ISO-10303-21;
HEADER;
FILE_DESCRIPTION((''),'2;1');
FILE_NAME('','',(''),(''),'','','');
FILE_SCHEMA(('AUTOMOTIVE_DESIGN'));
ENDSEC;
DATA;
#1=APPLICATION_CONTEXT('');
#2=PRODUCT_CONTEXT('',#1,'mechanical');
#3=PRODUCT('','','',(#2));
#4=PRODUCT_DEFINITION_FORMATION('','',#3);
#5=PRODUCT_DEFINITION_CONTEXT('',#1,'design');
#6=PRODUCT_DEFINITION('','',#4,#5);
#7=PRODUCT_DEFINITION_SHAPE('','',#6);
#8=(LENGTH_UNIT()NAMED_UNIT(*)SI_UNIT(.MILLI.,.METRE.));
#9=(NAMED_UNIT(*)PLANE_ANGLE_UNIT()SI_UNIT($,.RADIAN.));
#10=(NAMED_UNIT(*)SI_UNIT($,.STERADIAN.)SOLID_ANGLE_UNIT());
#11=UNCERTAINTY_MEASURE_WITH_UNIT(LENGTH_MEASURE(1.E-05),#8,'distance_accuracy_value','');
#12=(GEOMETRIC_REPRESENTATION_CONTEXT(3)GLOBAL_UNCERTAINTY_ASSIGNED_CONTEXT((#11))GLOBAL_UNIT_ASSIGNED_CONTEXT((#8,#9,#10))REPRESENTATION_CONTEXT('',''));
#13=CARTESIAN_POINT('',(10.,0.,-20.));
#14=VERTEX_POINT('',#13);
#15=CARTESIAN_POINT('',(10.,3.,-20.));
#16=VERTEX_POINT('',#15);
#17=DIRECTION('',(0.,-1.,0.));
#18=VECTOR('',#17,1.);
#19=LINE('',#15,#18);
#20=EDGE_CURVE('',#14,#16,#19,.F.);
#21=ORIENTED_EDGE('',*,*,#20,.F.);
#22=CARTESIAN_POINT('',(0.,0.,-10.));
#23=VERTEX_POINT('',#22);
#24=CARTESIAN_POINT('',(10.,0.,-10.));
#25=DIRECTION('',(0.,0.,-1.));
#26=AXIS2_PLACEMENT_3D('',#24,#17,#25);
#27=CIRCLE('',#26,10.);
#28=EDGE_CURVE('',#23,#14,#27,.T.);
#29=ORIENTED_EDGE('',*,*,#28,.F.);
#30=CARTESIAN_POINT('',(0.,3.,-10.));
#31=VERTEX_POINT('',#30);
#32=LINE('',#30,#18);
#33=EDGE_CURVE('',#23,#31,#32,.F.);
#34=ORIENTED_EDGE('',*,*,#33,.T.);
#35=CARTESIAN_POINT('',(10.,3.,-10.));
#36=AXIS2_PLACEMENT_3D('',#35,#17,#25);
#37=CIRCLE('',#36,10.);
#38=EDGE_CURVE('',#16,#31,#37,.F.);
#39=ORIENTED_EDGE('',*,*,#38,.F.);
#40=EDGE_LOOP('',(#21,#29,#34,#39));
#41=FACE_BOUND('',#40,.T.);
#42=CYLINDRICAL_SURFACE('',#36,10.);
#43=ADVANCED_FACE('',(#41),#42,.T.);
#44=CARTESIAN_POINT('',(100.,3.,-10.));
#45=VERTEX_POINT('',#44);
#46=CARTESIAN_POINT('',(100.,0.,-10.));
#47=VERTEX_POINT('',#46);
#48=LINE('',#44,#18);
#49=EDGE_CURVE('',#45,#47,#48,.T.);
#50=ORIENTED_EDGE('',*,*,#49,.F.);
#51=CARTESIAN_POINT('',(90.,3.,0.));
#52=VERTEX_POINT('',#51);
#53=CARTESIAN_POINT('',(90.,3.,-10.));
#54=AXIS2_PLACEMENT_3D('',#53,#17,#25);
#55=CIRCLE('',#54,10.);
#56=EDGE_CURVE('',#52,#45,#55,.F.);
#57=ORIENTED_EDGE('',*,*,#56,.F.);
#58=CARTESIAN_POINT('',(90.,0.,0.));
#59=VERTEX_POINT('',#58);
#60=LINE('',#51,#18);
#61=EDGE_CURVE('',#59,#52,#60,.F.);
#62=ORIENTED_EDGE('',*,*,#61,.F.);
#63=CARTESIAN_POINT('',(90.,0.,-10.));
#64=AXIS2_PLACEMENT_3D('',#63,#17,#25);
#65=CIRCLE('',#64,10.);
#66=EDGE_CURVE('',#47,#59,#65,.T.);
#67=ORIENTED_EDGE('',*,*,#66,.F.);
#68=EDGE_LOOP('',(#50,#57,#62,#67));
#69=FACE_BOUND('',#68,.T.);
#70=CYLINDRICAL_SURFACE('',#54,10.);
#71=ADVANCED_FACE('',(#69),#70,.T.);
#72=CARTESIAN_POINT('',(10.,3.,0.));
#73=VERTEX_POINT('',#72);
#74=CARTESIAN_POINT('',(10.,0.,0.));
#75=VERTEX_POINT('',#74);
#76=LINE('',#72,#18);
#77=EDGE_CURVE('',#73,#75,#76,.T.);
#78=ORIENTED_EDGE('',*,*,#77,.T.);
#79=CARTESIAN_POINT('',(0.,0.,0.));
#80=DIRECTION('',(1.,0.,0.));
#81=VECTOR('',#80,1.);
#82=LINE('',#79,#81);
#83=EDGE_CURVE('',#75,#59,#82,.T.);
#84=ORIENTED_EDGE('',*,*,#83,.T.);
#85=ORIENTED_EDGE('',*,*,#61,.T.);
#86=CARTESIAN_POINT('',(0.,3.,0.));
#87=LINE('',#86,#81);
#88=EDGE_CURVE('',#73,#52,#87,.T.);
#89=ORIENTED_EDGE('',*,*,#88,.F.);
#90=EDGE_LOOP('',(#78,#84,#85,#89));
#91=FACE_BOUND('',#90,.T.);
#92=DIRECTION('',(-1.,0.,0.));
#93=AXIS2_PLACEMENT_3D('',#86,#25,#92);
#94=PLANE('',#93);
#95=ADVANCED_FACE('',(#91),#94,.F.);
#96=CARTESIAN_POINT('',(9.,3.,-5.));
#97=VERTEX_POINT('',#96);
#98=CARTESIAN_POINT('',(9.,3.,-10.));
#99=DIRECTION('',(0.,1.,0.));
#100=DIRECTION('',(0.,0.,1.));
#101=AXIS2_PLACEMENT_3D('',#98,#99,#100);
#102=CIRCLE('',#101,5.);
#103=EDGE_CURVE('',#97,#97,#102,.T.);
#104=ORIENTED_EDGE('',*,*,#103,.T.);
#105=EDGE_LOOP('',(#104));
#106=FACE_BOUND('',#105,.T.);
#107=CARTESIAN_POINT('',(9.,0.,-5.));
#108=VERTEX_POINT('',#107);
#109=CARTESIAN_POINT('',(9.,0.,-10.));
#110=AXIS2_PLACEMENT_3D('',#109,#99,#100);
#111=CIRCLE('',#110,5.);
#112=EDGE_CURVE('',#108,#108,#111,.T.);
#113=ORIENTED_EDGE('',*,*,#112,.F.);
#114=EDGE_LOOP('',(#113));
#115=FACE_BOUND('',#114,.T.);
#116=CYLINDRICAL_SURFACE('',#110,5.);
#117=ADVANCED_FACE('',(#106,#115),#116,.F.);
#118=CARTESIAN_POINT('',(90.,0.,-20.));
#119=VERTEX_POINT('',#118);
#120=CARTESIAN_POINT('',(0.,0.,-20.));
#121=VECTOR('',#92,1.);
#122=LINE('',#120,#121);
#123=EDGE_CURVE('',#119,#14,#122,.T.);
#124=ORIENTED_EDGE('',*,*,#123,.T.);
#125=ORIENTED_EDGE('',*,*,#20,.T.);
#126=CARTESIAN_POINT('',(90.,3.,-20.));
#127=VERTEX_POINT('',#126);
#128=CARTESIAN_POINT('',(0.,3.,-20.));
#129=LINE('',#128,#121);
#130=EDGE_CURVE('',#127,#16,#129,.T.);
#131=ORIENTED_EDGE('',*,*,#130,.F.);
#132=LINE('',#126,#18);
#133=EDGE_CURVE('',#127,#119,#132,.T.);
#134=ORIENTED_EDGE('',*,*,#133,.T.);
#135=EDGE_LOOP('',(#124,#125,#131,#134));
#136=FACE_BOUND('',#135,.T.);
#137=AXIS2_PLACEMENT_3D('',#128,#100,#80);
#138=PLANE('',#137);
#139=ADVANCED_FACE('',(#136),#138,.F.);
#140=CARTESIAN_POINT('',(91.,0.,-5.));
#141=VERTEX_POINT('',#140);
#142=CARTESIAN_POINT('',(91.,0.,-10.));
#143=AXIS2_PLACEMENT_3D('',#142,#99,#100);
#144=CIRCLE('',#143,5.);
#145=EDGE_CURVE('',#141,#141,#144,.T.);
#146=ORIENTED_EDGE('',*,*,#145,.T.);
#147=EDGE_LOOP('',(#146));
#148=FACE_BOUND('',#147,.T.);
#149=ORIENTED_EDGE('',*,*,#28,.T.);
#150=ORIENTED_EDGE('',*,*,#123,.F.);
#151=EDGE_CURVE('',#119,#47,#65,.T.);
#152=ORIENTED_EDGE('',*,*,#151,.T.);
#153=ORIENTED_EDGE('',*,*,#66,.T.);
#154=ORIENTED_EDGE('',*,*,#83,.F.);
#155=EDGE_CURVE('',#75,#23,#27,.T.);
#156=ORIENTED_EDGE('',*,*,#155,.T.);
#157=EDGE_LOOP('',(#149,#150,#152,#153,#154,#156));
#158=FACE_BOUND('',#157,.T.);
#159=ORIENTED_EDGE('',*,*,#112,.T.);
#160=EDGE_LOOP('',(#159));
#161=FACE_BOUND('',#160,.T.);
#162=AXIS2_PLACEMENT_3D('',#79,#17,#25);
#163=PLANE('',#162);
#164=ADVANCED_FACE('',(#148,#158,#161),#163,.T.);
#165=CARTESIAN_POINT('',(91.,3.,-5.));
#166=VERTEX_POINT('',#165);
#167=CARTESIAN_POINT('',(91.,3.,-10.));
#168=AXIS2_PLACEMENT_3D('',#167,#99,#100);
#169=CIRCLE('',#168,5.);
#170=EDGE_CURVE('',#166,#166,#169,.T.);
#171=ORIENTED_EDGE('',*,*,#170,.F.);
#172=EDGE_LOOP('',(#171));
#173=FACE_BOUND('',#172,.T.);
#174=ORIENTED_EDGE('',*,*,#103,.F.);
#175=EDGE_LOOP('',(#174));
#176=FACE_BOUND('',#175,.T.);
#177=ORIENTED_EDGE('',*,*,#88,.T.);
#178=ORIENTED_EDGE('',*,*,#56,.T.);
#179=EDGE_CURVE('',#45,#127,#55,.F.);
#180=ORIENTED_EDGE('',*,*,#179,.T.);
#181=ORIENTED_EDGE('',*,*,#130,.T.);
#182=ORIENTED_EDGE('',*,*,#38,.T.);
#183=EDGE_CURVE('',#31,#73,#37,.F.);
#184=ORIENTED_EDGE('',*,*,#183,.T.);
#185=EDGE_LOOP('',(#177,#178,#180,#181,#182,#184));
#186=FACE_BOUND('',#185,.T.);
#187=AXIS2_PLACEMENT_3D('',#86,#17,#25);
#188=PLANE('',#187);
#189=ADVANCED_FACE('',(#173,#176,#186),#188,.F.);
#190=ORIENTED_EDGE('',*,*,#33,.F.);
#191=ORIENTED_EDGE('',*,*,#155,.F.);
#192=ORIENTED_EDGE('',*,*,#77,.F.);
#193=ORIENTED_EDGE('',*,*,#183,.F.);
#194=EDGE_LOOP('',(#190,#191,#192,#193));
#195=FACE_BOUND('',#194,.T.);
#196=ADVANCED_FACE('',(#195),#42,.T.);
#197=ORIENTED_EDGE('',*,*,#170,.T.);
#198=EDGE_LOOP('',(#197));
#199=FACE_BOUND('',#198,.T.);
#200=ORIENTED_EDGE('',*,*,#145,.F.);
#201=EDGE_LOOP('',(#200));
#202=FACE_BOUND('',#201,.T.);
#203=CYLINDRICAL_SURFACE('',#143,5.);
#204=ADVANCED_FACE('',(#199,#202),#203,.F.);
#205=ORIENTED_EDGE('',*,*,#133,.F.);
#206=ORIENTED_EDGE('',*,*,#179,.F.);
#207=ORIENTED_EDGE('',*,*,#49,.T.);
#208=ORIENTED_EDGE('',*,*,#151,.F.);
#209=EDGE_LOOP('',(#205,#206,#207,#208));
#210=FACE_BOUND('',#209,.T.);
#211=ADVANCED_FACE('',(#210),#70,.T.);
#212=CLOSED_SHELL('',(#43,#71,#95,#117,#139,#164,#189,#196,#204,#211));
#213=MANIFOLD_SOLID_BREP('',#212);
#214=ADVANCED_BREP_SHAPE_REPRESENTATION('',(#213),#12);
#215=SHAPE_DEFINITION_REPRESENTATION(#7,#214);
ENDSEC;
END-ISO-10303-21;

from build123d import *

# Parameters (mm, degrees)
SKETCH2_W           = 100
SKETCH2_H           = 20
BOSS_EXTRUDE1_DEPTH = 3
SKETCH3_R           = 5
CUT_EXTRUDE1_DEPTH  = 103.02450686
SKETCH4_R           = 5
CUT_EXTRUDE2_DEPTH  = 103.02450686
FILLET1_R           = 10
FILLET2_R           = 10


with BuildPart() as part:
    # Sketch2 → Boss-Extrude1 (new body)
    with BuildSketch(Plane(origin=(0, 0, 0), x_dir=(1, 0, 0), z_dir=(0, 1, 0))):
        with Locations((50, 10)):
            Rectangle(SKETCH2_W, SKETCH2_H)
    extrude(amount=BOSS_EXTRUDE1_DEPTH)

    # Sketch3 → Cut-Extrude1 (cut, through all)
    with BuildSketch(Plane(origin=(0, 3, 0), x_dir=(1, 0, 0), z_dir=(0, 1, 0))):
        with Locations(Location((9, 10, 0), (0, 0, 270))):
            Circle(SKETCH3_R)
    extrude(amount=-CUT_EXTRUDE1_DEPTH, mode=Mode.SUBTRACT)

    # Sketch4 → Cut-Extrude2 (cut, through all)
    with BuildSketch(Plane(origin=(0, 3, 0), x_dir=(1, 0, 0), z_dir=(0, 1, 0))):
        with Locations(Location((91, 10, 0), (0, 0, 270))):
            Circle(SKETCH4_R)
    extrude(amount=-CUT_EXTRUDE2_DEPTH, mode=Mode.SUBTRACT)

    # Fillet1
    fillet1_edges = [part.edges().sort_by_distance(p)[0] for p in [
        (0, 1.5, -20),
        (0, 1.5, 0),
    ]]
    fillet(fillet1_edges, radius=FILLET1_R - 0.0001)  # a hair under: the kernel refuses the full size

    # Fillet2
    fillet2_edges = [part.edges().sort_by_distance(p)[0] for p in [
        (100, 1.5, -20),
        (100, 1.5, 0),
    ]]
    fillet(fillet2_edges, radius=FILLET2_R - 0.0001)  # a hair under: the kernel refuses the full size


solid = part.part
